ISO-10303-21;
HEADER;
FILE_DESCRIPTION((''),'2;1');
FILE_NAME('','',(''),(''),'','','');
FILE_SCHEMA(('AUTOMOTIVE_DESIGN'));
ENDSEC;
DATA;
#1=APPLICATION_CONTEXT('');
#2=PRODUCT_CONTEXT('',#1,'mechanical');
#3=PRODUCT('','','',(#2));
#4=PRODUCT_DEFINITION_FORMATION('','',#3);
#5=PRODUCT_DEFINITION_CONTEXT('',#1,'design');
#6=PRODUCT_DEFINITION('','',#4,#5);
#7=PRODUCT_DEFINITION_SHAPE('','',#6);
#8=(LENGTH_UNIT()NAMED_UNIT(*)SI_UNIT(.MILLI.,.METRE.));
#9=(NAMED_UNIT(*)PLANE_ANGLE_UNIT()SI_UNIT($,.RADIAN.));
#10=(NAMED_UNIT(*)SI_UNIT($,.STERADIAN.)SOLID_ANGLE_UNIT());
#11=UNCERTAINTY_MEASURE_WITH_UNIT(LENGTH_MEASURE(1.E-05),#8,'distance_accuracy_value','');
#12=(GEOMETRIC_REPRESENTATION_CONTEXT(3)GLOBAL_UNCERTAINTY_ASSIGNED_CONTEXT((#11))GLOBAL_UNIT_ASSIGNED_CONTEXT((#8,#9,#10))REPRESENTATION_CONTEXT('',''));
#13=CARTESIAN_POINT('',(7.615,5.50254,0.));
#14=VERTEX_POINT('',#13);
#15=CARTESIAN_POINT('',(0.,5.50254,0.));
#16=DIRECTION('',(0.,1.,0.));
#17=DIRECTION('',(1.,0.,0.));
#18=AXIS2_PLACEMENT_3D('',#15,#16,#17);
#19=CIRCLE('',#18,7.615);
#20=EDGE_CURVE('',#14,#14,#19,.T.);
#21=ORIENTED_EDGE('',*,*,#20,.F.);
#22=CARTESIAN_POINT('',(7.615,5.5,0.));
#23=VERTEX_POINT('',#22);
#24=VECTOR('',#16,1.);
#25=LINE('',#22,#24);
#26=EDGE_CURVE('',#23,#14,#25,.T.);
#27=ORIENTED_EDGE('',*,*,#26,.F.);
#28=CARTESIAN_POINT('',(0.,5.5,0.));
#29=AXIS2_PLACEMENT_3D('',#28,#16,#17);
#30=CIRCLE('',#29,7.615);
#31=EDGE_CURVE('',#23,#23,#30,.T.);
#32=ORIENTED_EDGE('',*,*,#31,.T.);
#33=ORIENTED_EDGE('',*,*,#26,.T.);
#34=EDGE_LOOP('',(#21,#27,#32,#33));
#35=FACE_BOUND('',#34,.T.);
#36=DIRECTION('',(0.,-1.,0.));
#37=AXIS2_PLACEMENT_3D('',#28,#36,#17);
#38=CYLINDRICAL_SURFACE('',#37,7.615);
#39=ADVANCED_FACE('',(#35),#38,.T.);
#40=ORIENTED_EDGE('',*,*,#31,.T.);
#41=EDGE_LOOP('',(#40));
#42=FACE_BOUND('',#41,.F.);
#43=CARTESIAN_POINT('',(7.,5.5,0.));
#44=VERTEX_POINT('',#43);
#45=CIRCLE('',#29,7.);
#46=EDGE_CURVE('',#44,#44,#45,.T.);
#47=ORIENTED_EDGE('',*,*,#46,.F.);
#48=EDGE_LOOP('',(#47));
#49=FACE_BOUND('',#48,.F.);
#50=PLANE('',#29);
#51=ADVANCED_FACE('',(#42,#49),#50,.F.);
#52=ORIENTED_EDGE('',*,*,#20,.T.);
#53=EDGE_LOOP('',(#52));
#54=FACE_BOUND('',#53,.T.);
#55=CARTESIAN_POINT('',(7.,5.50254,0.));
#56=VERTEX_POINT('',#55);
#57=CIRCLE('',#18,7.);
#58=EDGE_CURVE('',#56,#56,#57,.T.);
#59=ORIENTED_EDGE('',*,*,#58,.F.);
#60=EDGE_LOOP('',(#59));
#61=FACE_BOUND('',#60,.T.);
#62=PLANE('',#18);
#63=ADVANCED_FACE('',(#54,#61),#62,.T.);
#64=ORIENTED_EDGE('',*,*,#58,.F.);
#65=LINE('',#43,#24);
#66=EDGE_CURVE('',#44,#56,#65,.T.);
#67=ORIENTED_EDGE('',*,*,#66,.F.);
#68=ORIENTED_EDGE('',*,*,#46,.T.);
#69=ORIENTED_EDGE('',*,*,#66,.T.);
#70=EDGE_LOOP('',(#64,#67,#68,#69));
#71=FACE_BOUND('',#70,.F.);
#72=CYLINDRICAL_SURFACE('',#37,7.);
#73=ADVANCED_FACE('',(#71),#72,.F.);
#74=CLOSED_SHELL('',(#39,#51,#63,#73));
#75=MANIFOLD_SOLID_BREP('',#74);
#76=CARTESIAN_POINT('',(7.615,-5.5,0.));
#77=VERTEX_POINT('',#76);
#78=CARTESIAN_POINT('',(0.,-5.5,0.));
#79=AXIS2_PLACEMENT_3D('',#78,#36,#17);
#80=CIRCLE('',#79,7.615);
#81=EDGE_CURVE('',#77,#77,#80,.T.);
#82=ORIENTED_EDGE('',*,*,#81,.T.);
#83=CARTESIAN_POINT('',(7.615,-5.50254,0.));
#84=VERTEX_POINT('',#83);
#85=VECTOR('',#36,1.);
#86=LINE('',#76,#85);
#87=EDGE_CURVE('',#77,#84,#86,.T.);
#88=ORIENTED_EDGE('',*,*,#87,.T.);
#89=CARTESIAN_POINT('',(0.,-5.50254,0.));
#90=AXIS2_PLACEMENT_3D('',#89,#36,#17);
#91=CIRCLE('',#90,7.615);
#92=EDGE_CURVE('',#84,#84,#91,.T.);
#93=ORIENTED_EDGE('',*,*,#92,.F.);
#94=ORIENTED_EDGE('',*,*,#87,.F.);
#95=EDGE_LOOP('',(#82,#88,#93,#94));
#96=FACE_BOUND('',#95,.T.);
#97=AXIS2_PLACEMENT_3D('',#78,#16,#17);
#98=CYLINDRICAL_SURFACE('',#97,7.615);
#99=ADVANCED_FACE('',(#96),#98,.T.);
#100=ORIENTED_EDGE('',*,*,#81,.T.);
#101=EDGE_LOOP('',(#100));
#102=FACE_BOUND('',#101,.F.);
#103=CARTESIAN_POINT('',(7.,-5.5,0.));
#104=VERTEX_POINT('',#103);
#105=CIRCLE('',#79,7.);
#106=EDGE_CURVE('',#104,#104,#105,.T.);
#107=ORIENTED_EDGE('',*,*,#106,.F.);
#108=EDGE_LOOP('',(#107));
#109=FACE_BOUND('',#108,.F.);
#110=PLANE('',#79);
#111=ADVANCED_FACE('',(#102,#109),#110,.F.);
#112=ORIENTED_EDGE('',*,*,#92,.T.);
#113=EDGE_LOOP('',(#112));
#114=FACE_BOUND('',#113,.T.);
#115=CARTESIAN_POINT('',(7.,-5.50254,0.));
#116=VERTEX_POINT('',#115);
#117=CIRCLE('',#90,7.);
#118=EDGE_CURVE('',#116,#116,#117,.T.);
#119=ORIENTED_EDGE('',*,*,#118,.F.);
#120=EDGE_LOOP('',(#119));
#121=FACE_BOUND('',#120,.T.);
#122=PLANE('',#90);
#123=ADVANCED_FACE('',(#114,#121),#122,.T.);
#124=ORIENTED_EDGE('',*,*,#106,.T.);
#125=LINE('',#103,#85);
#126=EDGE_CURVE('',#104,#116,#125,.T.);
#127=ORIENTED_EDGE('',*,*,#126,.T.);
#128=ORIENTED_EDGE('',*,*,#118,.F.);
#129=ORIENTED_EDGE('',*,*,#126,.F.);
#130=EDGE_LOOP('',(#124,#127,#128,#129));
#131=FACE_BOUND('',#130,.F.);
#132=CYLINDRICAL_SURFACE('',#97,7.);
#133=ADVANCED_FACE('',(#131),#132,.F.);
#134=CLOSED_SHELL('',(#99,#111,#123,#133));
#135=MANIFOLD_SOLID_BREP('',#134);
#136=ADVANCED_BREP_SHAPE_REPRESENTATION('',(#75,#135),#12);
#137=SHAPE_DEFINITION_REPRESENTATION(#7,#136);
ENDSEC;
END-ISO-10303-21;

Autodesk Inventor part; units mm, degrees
ref_plane "YZ Plane" through (0, 0, 0) normal (1, 0, 0) x (0, 1, 0)
ref_plane "XZ Plane" through (0, 0, 0) normal (0, 1, 0) x (-1, 0, 0)
ref_plane "XY Plane" through (0, 0, 0) normal (0, 0, 1) x (1, 0, 0)
sketch "Sketch1" plane through (0, 5.5, 0) normal (0, 1, 0) x (1, 0, 0)
  circle A0 centre (0, 0) radius 7.615 projected
  circle A1 centre (0, 0) radius 7 projected
extrude "Extrusion1" add sketch "Sketch1" along normal blind 0.00254
sketch "Sketch2" plane through (0, -5.5, 0) normal (0, -1, 0) x (1, 0, 0)
  circle A0 centre (0, 0) radius 7.615 projected
  circle A1 centre (0, 0) radius 7 projected
extrude "Extrusion2" add sketch "Sketch2" along normal blind 0.00254
properties part number "MSK01-05A"
